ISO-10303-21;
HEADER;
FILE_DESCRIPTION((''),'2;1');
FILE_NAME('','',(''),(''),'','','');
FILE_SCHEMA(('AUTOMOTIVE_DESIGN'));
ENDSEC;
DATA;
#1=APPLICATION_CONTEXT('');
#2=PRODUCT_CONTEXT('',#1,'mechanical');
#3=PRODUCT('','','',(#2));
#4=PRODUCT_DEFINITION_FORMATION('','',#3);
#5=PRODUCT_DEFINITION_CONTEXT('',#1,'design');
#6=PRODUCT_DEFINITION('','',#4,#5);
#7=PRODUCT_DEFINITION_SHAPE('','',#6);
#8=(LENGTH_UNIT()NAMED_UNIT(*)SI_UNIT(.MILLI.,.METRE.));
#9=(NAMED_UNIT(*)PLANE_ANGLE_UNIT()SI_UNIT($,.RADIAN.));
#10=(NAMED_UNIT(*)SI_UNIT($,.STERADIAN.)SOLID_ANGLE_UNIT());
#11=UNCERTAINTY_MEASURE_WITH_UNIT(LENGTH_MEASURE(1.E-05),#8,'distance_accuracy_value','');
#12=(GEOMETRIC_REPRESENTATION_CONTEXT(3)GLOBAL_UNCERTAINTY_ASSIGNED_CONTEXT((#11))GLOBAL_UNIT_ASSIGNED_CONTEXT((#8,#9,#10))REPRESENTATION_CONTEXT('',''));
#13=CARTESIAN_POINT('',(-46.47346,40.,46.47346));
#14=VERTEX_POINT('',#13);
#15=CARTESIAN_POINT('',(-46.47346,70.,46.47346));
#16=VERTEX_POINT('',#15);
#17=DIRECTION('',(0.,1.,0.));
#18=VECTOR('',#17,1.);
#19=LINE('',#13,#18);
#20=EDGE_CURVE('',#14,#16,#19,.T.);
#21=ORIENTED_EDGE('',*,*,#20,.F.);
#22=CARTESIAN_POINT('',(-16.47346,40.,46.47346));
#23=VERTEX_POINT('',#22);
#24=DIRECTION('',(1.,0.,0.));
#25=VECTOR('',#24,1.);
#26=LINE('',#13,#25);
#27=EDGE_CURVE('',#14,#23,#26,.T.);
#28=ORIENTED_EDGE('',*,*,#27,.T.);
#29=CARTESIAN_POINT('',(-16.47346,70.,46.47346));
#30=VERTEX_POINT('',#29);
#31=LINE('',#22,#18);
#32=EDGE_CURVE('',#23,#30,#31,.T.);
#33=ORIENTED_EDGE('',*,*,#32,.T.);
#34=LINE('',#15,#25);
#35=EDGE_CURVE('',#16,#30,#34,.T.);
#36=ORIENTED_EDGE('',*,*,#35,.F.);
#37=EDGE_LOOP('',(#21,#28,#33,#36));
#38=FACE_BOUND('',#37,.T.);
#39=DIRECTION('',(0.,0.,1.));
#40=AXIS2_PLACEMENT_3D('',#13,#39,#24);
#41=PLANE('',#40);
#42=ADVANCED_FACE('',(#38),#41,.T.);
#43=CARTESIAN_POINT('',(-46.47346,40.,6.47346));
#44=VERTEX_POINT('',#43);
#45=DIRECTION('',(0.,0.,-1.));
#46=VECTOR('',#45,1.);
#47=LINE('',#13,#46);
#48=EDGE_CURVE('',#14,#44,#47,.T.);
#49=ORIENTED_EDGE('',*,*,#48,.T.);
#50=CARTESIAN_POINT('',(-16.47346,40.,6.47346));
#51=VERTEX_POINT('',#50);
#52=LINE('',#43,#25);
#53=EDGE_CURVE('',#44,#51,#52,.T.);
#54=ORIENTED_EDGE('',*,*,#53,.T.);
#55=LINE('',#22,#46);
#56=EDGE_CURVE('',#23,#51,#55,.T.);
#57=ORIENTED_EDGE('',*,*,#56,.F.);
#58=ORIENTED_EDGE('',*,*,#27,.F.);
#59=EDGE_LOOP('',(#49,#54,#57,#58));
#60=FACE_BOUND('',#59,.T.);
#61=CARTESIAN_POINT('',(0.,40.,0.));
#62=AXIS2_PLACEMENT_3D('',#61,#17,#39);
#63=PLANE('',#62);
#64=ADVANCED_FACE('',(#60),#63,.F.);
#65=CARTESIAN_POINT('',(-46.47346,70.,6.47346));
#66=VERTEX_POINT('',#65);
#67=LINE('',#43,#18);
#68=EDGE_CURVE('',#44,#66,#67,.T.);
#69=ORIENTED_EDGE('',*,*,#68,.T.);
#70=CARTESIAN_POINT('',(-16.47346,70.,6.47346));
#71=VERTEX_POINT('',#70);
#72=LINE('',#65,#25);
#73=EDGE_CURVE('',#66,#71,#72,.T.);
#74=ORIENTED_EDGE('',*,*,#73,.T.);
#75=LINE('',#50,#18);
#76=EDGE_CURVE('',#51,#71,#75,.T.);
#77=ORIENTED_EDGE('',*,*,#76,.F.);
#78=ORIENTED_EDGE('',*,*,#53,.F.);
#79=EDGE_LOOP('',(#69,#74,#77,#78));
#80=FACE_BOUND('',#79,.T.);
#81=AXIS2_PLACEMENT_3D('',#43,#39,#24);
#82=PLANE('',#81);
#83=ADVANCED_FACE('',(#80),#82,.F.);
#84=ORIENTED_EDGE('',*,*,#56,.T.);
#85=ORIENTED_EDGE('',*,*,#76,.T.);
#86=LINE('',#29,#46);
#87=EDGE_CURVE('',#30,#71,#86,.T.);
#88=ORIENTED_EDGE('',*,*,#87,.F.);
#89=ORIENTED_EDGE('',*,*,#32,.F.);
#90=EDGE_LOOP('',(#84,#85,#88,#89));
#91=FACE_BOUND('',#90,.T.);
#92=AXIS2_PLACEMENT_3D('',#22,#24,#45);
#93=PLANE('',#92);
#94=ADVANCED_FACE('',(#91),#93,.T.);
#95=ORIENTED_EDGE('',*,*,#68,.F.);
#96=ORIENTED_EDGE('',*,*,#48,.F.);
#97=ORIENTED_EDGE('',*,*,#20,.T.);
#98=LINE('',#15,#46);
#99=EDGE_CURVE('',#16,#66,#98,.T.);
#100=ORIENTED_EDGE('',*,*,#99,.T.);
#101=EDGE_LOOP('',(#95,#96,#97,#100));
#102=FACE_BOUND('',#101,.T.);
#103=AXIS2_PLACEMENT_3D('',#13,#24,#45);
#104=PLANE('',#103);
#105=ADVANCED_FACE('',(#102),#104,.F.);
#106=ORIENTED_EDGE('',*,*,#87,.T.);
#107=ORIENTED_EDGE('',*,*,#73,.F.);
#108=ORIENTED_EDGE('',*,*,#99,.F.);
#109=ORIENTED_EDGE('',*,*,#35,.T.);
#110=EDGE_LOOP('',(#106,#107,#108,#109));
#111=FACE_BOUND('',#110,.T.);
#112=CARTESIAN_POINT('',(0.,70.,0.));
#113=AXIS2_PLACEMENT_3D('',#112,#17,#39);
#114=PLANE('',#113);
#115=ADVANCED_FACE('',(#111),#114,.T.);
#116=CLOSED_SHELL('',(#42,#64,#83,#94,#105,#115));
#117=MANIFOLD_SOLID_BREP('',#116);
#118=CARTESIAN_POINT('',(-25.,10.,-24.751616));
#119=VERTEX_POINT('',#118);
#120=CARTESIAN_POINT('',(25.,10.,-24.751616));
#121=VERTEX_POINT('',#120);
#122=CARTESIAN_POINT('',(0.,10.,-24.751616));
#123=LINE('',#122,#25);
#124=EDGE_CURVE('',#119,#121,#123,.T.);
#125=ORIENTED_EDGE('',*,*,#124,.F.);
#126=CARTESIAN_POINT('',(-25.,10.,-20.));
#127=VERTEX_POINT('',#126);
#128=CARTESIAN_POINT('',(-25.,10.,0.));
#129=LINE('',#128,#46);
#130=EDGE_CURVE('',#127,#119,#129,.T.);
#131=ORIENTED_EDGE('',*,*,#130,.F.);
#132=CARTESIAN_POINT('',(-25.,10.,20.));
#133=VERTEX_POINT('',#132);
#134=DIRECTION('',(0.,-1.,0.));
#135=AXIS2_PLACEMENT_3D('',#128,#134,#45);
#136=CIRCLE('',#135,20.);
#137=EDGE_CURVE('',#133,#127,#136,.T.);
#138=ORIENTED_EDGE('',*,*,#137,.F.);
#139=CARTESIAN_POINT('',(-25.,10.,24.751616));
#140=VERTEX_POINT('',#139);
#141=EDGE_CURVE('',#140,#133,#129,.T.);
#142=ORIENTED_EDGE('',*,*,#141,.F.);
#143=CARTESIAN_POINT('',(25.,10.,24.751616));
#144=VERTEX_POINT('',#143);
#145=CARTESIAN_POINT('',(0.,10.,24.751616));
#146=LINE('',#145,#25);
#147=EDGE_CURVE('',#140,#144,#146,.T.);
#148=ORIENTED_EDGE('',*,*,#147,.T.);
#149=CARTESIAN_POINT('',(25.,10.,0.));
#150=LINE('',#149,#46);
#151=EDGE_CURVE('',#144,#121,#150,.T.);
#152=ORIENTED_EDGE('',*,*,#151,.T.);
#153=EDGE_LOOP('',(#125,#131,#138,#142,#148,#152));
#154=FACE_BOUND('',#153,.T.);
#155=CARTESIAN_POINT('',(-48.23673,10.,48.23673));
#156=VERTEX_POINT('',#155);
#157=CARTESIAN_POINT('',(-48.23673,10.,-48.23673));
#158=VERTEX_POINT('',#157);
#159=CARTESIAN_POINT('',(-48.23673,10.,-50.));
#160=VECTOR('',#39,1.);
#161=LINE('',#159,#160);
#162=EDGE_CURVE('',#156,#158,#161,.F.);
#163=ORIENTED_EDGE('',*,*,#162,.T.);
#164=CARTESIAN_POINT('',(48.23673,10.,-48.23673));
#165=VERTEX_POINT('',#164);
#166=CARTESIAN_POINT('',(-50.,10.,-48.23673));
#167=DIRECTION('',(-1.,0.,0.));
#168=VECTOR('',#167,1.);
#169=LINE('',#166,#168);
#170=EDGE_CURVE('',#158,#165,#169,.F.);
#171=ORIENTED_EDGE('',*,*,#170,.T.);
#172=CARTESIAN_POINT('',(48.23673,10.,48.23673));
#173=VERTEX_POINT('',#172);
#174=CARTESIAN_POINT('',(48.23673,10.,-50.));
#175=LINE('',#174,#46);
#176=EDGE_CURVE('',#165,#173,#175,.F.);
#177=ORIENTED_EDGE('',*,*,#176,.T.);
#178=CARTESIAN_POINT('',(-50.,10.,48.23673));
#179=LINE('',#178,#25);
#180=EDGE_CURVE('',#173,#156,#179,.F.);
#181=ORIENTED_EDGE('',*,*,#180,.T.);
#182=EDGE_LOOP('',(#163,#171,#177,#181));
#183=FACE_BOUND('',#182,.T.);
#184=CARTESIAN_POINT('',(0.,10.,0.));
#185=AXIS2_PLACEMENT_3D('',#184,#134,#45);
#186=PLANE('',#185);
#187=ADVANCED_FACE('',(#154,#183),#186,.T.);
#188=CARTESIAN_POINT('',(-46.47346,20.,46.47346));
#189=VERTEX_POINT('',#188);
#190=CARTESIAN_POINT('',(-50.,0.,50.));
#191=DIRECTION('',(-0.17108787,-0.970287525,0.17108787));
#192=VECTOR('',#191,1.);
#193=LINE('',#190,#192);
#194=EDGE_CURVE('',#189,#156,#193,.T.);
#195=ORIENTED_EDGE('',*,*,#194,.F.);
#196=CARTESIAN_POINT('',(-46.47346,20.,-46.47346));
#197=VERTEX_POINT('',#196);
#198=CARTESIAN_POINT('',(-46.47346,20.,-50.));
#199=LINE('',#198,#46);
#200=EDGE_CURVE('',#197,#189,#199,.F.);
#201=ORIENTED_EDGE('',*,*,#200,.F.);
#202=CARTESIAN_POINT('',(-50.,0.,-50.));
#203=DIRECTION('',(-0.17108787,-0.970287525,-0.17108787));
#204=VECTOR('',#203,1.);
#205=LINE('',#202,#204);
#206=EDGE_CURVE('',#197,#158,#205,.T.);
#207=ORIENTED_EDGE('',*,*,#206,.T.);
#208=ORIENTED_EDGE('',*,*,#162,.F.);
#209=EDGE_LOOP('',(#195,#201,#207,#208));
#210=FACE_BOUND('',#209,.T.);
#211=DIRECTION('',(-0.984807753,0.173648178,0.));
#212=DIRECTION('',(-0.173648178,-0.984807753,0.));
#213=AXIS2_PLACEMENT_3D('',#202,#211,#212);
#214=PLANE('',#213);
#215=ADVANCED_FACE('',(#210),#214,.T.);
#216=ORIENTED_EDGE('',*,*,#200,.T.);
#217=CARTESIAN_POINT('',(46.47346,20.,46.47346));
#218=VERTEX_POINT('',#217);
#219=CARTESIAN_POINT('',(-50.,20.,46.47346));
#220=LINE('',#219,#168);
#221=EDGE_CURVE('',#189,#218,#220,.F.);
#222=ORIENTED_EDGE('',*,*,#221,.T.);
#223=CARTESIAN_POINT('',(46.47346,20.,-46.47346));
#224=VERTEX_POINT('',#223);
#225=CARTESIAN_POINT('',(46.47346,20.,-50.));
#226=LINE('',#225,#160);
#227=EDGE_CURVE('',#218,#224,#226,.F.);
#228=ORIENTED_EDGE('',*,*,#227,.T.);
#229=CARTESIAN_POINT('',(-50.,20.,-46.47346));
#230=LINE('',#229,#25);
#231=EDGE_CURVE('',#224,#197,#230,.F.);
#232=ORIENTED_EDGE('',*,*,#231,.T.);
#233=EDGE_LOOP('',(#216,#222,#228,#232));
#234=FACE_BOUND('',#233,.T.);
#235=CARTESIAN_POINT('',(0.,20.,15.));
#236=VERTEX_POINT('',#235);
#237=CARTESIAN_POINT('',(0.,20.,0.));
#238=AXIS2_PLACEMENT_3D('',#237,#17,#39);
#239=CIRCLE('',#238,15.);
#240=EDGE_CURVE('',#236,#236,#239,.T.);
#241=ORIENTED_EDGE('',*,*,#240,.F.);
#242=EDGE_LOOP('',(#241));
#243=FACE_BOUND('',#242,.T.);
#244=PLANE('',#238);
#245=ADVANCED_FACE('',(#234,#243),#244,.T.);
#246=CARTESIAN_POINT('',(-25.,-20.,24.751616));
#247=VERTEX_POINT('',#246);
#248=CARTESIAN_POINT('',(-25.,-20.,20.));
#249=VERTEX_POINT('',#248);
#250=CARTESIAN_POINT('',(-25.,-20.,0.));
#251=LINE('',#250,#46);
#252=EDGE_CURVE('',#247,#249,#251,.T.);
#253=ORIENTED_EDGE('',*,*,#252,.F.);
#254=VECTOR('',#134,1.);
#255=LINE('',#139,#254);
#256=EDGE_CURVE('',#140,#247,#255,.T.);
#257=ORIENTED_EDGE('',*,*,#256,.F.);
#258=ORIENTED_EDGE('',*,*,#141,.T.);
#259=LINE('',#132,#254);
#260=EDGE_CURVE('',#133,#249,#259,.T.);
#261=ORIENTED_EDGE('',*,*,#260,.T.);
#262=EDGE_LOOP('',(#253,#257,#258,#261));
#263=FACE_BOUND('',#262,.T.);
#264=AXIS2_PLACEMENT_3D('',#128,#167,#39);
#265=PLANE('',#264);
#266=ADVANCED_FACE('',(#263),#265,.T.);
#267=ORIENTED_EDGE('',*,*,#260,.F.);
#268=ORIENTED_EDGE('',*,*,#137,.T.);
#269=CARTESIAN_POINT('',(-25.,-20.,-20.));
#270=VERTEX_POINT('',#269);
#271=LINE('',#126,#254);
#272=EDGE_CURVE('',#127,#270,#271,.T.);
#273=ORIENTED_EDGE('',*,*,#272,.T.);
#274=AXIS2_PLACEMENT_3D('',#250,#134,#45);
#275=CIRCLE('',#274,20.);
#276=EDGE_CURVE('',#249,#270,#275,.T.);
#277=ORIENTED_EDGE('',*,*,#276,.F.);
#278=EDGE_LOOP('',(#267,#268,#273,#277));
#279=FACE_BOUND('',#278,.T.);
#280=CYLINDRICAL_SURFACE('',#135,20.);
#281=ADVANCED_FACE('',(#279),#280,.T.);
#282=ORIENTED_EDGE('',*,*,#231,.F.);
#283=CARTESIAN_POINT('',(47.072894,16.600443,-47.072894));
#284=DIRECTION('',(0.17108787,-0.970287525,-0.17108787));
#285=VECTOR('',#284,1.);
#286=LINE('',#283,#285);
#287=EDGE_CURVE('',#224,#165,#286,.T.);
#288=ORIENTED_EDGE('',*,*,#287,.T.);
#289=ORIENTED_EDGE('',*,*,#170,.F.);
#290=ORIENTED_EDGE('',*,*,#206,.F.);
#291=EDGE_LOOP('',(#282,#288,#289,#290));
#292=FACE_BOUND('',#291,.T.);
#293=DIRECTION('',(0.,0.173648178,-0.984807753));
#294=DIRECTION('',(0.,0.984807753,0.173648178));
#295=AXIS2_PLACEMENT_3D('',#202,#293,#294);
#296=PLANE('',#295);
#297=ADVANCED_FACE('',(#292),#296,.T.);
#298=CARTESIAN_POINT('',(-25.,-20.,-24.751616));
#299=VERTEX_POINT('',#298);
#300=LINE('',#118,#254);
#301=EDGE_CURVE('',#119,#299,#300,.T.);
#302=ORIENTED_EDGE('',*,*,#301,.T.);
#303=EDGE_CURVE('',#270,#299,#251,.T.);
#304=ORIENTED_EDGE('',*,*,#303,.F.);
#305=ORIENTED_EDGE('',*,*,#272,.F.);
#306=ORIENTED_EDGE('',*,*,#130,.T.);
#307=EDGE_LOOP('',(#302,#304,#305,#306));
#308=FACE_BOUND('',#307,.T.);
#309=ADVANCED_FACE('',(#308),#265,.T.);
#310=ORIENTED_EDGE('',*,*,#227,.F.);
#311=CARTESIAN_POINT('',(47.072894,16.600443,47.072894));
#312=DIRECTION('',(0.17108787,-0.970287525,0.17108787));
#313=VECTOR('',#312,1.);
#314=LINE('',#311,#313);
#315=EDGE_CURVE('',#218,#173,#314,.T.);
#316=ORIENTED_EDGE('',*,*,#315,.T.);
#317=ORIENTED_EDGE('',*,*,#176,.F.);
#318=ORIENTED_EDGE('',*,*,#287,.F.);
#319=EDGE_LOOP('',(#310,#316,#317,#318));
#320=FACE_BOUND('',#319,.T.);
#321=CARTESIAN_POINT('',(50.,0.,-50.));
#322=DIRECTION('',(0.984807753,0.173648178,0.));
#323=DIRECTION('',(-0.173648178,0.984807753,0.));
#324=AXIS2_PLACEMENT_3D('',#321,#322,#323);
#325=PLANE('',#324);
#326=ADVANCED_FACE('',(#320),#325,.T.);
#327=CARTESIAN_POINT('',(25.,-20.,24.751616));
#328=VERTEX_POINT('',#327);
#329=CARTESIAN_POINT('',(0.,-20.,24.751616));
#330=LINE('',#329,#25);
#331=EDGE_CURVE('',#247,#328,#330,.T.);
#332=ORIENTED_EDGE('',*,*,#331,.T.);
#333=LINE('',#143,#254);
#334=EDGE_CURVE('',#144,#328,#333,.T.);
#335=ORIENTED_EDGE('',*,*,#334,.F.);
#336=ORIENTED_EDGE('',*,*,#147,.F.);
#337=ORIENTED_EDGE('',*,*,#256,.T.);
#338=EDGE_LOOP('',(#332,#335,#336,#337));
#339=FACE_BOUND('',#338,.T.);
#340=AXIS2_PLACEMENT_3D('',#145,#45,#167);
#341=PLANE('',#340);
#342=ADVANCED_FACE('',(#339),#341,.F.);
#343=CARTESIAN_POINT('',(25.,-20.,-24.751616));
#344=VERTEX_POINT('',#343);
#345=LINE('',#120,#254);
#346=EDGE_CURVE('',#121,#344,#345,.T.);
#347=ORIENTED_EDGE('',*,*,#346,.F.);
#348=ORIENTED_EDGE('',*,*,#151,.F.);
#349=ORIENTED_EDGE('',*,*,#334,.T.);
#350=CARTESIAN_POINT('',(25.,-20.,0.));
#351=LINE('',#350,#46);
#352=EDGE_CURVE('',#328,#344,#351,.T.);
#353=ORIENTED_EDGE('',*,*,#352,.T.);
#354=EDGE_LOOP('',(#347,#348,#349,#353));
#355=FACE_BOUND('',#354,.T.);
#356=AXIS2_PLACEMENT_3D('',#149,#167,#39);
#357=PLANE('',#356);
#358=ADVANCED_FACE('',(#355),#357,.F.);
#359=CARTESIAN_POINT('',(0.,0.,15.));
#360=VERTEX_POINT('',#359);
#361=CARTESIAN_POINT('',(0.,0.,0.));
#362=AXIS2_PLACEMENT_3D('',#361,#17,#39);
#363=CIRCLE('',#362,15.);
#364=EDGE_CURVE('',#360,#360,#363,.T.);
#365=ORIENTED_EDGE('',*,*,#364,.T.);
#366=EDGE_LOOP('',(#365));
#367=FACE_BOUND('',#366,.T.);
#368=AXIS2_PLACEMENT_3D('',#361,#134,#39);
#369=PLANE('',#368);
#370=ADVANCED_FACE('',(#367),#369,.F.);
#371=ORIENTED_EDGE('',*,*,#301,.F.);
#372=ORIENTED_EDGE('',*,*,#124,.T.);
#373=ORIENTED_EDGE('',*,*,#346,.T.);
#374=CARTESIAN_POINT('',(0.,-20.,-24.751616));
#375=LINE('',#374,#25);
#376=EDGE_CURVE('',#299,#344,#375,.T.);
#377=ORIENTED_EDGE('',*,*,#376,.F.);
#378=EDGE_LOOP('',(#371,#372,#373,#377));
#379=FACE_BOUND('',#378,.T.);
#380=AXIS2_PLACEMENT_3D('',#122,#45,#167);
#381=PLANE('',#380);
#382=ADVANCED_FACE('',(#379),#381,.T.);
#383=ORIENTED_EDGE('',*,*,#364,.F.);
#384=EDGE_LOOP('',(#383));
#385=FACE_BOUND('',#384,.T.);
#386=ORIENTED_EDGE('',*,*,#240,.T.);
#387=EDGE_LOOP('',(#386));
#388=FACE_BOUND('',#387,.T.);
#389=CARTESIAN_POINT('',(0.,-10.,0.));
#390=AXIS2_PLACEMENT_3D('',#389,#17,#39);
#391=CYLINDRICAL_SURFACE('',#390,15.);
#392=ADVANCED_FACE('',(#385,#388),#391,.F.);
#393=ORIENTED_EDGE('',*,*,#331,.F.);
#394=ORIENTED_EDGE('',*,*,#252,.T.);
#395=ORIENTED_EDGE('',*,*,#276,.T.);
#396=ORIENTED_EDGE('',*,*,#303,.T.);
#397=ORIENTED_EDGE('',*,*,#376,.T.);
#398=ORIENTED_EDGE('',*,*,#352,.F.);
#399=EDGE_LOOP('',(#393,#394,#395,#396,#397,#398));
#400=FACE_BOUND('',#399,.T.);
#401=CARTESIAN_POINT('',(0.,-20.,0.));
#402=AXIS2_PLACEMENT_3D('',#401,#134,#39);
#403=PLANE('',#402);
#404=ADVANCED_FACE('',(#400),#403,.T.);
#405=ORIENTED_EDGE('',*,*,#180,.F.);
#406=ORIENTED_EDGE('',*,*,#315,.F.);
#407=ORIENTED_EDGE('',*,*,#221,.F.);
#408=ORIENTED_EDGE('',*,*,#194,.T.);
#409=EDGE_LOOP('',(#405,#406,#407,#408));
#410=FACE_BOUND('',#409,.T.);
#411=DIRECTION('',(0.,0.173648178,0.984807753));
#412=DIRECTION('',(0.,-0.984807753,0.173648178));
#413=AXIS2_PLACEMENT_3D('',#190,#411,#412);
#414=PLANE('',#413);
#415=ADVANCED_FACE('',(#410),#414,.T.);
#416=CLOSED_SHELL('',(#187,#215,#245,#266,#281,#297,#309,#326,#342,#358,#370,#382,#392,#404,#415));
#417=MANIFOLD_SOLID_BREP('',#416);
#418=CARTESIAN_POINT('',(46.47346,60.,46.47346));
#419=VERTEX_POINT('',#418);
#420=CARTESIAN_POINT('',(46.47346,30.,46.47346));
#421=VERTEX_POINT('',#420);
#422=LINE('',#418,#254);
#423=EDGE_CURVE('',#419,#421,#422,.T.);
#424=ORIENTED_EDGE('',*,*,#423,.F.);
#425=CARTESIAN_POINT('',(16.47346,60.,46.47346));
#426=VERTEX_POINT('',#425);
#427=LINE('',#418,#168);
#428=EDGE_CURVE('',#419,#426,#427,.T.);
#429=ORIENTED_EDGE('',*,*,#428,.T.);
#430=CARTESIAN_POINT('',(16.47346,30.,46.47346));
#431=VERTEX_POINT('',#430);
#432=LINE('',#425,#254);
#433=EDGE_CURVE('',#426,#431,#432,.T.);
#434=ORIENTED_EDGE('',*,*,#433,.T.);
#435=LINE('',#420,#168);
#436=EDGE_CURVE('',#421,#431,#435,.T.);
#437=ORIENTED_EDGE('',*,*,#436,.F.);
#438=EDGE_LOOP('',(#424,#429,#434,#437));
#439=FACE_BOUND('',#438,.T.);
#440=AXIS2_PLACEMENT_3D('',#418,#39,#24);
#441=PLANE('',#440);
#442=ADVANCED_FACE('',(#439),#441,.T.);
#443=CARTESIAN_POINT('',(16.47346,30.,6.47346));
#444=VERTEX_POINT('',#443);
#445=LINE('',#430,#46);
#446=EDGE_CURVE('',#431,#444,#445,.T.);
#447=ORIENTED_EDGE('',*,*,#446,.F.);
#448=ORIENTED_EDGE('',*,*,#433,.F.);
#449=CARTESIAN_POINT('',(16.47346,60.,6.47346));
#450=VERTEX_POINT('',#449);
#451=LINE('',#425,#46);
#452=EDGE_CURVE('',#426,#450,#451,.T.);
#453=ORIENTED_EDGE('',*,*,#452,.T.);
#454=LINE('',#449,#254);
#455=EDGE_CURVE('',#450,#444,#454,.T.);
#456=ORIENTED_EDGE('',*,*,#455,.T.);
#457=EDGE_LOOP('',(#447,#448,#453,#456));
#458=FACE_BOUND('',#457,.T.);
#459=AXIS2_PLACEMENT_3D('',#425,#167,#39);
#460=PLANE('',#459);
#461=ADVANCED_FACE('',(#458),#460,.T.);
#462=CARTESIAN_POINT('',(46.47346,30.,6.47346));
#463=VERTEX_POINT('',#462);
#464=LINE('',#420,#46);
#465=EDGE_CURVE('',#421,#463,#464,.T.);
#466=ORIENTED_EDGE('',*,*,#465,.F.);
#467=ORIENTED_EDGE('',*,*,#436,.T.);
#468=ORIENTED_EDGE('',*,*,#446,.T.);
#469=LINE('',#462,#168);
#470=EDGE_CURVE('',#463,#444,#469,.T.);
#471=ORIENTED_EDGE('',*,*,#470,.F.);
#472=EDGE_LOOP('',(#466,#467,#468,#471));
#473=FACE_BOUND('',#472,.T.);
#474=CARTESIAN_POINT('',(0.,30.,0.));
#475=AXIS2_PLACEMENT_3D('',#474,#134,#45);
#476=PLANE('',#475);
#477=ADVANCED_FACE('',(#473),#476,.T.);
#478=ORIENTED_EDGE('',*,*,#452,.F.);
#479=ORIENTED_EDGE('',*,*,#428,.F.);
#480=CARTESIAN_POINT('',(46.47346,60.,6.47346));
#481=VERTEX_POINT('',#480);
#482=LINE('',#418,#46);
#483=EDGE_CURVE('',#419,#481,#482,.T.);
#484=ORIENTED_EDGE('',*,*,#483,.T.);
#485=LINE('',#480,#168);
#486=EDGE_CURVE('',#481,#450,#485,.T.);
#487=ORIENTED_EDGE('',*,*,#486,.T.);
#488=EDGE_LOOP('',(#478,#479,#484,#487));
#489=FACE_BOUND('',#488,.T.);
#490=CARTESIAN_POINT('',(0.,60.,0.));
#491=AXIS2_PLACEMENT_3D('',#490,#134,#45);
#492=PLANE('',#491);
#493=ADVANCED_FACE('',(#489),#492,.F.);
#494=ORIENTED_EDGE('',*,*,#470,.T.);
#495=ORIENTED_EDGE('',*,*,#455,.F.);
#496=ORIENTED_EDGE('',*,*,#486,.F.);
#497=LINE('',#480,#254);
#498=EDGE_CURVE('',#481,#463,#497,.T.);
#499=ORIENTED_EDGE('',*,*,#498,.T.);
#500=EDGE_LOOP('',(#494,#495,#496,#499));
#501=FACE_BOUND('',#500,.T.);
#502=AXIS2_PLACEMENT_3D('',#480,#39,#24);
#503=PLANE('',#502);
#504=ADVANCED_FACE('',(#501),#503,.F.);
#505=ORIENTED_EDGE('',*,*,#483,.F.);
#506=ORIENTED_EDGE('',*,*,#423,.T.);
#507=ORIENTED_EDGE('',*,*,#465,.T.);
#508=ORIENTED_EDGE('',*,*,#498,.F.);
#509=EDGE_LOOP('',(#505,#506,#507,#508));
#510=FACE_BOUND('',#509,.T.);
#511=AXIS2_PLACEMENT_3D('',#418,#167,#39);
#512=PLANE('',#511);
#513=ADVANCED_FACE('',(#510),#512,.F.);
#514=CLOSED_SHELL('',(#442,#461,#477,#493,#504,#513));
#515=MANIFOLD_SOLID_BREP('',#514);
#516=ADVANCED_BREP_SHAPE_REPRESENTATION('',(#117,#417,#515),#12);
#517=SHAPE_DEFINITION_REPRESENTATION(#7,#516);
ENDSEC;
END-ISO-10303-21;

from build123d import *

# Parameters (mm, degrees)
SKETCH1_W                = 100
SKETCH1_H                = 100
BOSS_EXTRUDE1_DEPTH      = 20
BOSS_EXTRUDE1_TAPER      = 10
BOSS_EXTRUDE2_DEPTH      = 20
BOSS_EXTRUDE2_DEPTH_BACK = 10
BOSS_EXTRUDE2_START      = 30
SKETCH2_W                = 30
SKETCH2_H                = 40
BOSS_EXTRUDE3_START      = 10
SKETCH3_W                = 30
SKETCH3_H                = 40
BOSS_EXTRUDE3_DEPTH      = 30
SKETCH5_R                = 15
CUT_EXTRUDE1_DEPTH       = 30
SKETCH7_OUTSIDE_W        = 135.526
SKETCH7_OUTSIDE_H        = 135.526
CUT_EXTRUDE2_DEPTH       = 30


with BuildPart() as part:
    # Sketch1 → Boss-Extrude1 (new body)
    with BuildSketch(Plane(origin=(0, 0, 0), x_dir=(1, 0, 0), z_dir=(0, 1, 0))):
        Rectangle(SKETCH1_W, SKETCH1_H)
    boss_extrude1 = extrude(amount=BOSS_EXTRUDE1_DEPTH, taper=BOSS_EXTRUDE1_TAPER)

    # Sketch5 → Cut-Extrude1 (cut)
    with BuildSketch(Plane(origin=(0, 20, 0), x_dir=(1, 0, 0), z_dir=(0, 1, 0))):
        Circle(SKETCH5_R)
    extrude(amount=-CUT_EXTRUDE1_DEPTH, mode=Mode.SUBTRACT)

    # Mirror3: Boss-Extrude1 across plane
    add(boss_extrude1.mirror(Plane.ZX))

    # Sketch7 outside → Cut-Extrude2 (cut)
    with BuildSketch(Plane.XZ.offset(20)):
        Rectangle(SKETCH7_OUTSIDE_W, SKETCH7_OUTSIDE_H)
        with BuildLine():
            Line((25, 24.751616122), (-25, 24.751616122))
            Line((-25, 24.751616122), (-25, 20))
            ThreePointArc((-25, 20), (-45, 0), (-25, -20))
            Line((-25, -20), (-25, -24.751616122))
            Line((-25, -24.751616122), (25, -24.751616122))
            Line((25, -24.751616122), (25, 24.751616122))
        make_face(mode=Mode.SUBTRACT)
    extrude(amount=-CUT_EXTRUDE2_DEPTH, mode=Mode.SUBTRACT)


with BuildPart() as body_2:
    # Sketch2 → Boss-Extrude2 (new, two sides: drawn at the far end of the back side and taken through both)
    with BuildSketch(Plane(origin=(0, 20, 0), x_dir=(1, 0, 0), z_dir=(0, 1, 0)).offset(BOSS_EXTRUDE2_START - BOSS_EXTRUDE2_DEPTH_BACK)):
        with Locations((-31.473460386, -26.473460386)):
            Rectangle(SKETCH2_W, SKETCH2_H)
    extrude(amount=BOSS_EXTRUDE2_DEPTH + BOSS_EXTRUDE2_DEPTH_BACK)


with BuildPart() as body_3:
    # Sketch3 → Boss-Extrude3 (new body)
    with BuildSketch(Plane(origin=(0, 20, 0), x_dir=(1, 0, 0), z_dir=(0, 1, 0)).offset(BOSS_EXTRUDE3_START)):
        with Locations((31.473460386, -26.473460386)):
            Rectangle(SKETCH3_W, SKETCH3_H)
    extrude(amount=BOSS_EXTRUDE3_DEPTH)


solid = Compound([part.part, body_2.part, body_3.part])
